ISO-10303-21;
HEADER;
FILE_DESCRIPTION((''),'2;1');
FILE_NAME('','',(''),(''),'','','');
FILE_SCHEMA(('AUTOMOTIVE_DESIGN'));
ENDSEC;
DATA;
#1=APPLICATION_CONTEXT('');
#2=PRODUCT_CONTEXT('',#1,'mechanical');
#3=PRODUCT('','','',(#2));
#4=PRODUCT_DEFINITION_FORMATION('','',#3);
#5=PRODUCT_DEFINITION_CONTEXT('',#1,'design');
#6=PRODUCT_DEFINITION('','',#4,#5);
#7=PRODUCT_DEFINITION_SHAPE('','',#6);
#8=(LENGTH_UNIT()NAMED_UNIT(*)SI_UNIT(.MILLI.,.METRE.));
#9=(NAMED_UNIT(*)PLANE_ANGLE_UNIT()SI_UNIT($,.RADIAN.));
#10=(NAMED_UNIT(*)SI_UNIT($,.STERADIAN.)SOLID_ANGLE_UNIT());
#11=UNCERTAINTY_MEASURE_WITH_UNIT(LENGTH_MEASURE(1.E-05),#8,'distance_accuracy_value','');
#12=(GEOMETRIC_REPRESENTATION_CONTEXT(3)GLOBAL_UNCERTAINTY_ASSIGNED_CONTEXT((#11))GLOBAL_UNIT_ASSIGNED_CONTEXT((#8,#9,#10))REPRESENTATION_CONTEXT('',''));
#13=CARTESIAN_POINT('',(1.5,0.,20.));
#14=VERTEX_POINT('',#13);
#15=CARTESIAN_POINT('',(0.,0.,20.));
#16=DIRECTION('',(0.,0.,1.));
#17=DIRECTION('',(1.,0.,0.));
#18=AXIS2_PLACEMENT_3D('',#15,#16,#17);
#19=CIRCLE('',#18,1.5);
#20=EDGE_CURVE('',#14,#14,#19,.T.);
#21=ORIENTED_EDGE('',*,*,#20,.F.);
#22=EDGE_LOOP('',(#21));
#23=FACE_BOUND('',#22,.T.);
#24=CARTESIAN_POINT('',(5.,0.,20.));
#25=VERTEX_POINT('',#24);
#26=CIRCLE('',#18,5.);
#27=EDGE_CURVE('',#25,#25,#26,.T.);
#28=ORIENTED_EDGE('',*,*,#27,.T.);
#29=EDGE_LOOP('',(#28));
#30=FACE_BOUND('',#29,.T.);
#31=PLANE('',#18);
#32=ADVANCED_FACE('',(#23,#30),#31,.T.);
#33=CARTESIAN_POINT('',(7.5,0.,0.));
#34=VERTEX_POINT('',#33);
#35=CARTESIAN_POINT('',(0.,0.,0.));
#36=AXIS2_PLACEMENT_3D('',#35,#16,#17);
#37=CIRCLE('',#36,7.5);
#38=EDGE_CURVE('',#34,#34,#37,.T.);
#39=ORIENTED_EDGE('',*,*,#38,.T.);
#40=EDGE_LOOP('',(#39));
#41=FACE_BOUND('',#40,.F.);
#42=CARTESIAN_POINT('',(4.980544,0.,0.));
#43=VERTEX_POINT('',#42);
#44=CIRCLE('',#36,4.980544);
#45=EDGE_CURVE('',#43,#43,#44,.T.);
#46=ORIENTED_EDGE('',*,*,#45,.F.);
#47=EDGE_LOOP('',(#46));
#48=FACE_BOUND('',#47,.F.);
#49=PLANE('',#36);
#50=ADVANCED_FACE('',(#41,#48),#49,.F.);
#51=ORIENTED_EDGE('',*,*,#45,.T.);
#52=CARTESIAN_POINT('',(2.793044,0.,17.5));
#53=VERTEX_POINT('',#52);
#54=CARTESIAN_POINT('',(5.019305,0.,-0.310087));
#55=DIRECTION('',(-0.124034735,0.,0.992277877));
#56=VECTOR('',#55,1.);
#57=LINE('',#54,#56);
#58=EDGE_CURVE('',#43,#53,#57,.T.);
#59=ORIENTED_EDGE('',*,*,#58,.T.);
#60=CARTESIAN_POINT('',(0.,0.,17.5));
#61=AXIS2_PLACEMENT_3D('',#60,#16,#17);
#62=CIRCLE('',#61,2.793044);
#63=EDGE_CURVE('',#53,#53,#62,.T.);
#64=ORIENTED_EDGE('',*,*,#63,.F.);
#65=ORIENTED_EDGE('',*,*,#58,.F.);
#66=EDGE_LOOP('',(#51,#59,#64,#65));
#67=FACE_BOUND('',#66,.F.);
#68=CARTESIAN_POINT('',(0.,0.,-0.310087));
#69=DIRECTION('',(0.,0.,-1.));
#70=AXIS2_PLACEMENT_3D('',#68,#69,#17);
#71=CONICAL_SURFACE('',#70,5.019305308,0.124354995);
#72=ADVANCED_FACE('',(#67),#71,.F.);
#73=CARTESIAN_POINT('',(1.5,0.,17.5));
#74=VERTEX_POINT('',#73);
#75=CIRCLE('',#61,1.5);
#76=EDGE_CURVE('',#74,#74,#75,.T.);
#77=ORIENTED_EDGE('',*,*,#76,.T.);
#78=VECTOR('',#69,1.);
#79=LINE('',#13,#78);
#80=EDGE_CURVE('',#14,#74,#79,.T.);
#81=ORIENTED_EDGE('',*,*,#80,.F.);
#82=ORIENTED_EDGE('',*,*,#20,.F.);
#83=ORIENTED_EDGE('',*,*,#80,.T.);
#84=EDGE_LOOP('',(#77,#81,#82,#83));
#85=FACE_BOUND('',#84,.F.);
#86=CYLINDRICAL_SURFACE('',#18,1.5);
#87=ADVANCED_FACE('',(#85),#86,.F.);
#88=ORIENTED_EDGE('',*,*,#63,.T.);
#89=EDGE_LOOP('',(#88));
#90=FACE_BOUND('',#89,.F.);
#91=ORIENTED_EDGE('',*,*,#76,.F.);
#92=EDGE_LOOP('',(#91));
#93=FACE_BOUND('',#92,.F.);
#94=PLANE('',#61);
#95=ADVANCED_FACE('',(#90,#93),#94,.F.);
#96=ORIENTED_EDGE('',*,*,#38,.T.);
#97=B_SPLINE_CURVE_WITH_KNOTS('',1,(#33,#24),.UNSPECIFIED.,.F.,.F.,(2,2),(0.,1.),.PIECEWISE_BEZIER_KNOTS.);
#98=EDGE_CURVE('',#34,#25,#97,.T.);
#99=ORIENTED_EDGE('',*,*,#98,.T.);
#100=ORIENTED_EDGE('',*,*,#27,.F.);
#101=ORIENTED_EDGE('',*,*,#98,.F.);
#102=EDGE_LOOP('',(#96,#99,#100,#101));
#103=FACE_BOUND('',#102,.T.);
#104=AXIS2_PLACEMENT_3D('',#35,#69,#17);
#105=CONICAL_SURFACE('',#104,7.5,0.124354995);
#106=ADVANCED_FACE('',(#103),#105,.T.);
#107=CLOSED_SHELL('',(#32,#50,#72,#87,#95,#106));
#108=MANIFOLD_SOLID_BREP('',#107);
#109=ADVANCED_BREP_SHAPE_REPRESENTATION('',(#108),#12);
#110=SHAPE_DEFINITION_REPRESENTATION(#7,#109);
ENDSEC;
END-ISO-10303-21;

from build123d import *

# Parameters (mm, degrees)
F0_R     = 7.5
F2_R     = 5
F4_T     = -2.5
F5_R     = 1.5
F6_DEPTH = 25


with BuildPart() as f3:
    # F0 (on Top) → F3 section 0
    with BuildSketch(Plane.XY):
        Circle(F0_R)
    # F2 (on offset) → F3 section 1
    with BuildSketch(Plane.XY.offset(20)):
        Circle(F2_R)
    loft()

    # F4
    f4_openings = [f3.faces().sort_by_distance(p)[0] for p in [
        (0, 0, 0),
    ]]
    offset(amount=F4_T, openings=f4_openings, kind=Kind.INTERSECTION)

    # F5 (on face) → F6 (cut)
    with BuildSketch(Plane.XY.offset(20)):
        Circle(F5_R)
    extrude(amount=-F6_DEPTH, mode=Mode.SUBTRACT)


solid = f3.part
